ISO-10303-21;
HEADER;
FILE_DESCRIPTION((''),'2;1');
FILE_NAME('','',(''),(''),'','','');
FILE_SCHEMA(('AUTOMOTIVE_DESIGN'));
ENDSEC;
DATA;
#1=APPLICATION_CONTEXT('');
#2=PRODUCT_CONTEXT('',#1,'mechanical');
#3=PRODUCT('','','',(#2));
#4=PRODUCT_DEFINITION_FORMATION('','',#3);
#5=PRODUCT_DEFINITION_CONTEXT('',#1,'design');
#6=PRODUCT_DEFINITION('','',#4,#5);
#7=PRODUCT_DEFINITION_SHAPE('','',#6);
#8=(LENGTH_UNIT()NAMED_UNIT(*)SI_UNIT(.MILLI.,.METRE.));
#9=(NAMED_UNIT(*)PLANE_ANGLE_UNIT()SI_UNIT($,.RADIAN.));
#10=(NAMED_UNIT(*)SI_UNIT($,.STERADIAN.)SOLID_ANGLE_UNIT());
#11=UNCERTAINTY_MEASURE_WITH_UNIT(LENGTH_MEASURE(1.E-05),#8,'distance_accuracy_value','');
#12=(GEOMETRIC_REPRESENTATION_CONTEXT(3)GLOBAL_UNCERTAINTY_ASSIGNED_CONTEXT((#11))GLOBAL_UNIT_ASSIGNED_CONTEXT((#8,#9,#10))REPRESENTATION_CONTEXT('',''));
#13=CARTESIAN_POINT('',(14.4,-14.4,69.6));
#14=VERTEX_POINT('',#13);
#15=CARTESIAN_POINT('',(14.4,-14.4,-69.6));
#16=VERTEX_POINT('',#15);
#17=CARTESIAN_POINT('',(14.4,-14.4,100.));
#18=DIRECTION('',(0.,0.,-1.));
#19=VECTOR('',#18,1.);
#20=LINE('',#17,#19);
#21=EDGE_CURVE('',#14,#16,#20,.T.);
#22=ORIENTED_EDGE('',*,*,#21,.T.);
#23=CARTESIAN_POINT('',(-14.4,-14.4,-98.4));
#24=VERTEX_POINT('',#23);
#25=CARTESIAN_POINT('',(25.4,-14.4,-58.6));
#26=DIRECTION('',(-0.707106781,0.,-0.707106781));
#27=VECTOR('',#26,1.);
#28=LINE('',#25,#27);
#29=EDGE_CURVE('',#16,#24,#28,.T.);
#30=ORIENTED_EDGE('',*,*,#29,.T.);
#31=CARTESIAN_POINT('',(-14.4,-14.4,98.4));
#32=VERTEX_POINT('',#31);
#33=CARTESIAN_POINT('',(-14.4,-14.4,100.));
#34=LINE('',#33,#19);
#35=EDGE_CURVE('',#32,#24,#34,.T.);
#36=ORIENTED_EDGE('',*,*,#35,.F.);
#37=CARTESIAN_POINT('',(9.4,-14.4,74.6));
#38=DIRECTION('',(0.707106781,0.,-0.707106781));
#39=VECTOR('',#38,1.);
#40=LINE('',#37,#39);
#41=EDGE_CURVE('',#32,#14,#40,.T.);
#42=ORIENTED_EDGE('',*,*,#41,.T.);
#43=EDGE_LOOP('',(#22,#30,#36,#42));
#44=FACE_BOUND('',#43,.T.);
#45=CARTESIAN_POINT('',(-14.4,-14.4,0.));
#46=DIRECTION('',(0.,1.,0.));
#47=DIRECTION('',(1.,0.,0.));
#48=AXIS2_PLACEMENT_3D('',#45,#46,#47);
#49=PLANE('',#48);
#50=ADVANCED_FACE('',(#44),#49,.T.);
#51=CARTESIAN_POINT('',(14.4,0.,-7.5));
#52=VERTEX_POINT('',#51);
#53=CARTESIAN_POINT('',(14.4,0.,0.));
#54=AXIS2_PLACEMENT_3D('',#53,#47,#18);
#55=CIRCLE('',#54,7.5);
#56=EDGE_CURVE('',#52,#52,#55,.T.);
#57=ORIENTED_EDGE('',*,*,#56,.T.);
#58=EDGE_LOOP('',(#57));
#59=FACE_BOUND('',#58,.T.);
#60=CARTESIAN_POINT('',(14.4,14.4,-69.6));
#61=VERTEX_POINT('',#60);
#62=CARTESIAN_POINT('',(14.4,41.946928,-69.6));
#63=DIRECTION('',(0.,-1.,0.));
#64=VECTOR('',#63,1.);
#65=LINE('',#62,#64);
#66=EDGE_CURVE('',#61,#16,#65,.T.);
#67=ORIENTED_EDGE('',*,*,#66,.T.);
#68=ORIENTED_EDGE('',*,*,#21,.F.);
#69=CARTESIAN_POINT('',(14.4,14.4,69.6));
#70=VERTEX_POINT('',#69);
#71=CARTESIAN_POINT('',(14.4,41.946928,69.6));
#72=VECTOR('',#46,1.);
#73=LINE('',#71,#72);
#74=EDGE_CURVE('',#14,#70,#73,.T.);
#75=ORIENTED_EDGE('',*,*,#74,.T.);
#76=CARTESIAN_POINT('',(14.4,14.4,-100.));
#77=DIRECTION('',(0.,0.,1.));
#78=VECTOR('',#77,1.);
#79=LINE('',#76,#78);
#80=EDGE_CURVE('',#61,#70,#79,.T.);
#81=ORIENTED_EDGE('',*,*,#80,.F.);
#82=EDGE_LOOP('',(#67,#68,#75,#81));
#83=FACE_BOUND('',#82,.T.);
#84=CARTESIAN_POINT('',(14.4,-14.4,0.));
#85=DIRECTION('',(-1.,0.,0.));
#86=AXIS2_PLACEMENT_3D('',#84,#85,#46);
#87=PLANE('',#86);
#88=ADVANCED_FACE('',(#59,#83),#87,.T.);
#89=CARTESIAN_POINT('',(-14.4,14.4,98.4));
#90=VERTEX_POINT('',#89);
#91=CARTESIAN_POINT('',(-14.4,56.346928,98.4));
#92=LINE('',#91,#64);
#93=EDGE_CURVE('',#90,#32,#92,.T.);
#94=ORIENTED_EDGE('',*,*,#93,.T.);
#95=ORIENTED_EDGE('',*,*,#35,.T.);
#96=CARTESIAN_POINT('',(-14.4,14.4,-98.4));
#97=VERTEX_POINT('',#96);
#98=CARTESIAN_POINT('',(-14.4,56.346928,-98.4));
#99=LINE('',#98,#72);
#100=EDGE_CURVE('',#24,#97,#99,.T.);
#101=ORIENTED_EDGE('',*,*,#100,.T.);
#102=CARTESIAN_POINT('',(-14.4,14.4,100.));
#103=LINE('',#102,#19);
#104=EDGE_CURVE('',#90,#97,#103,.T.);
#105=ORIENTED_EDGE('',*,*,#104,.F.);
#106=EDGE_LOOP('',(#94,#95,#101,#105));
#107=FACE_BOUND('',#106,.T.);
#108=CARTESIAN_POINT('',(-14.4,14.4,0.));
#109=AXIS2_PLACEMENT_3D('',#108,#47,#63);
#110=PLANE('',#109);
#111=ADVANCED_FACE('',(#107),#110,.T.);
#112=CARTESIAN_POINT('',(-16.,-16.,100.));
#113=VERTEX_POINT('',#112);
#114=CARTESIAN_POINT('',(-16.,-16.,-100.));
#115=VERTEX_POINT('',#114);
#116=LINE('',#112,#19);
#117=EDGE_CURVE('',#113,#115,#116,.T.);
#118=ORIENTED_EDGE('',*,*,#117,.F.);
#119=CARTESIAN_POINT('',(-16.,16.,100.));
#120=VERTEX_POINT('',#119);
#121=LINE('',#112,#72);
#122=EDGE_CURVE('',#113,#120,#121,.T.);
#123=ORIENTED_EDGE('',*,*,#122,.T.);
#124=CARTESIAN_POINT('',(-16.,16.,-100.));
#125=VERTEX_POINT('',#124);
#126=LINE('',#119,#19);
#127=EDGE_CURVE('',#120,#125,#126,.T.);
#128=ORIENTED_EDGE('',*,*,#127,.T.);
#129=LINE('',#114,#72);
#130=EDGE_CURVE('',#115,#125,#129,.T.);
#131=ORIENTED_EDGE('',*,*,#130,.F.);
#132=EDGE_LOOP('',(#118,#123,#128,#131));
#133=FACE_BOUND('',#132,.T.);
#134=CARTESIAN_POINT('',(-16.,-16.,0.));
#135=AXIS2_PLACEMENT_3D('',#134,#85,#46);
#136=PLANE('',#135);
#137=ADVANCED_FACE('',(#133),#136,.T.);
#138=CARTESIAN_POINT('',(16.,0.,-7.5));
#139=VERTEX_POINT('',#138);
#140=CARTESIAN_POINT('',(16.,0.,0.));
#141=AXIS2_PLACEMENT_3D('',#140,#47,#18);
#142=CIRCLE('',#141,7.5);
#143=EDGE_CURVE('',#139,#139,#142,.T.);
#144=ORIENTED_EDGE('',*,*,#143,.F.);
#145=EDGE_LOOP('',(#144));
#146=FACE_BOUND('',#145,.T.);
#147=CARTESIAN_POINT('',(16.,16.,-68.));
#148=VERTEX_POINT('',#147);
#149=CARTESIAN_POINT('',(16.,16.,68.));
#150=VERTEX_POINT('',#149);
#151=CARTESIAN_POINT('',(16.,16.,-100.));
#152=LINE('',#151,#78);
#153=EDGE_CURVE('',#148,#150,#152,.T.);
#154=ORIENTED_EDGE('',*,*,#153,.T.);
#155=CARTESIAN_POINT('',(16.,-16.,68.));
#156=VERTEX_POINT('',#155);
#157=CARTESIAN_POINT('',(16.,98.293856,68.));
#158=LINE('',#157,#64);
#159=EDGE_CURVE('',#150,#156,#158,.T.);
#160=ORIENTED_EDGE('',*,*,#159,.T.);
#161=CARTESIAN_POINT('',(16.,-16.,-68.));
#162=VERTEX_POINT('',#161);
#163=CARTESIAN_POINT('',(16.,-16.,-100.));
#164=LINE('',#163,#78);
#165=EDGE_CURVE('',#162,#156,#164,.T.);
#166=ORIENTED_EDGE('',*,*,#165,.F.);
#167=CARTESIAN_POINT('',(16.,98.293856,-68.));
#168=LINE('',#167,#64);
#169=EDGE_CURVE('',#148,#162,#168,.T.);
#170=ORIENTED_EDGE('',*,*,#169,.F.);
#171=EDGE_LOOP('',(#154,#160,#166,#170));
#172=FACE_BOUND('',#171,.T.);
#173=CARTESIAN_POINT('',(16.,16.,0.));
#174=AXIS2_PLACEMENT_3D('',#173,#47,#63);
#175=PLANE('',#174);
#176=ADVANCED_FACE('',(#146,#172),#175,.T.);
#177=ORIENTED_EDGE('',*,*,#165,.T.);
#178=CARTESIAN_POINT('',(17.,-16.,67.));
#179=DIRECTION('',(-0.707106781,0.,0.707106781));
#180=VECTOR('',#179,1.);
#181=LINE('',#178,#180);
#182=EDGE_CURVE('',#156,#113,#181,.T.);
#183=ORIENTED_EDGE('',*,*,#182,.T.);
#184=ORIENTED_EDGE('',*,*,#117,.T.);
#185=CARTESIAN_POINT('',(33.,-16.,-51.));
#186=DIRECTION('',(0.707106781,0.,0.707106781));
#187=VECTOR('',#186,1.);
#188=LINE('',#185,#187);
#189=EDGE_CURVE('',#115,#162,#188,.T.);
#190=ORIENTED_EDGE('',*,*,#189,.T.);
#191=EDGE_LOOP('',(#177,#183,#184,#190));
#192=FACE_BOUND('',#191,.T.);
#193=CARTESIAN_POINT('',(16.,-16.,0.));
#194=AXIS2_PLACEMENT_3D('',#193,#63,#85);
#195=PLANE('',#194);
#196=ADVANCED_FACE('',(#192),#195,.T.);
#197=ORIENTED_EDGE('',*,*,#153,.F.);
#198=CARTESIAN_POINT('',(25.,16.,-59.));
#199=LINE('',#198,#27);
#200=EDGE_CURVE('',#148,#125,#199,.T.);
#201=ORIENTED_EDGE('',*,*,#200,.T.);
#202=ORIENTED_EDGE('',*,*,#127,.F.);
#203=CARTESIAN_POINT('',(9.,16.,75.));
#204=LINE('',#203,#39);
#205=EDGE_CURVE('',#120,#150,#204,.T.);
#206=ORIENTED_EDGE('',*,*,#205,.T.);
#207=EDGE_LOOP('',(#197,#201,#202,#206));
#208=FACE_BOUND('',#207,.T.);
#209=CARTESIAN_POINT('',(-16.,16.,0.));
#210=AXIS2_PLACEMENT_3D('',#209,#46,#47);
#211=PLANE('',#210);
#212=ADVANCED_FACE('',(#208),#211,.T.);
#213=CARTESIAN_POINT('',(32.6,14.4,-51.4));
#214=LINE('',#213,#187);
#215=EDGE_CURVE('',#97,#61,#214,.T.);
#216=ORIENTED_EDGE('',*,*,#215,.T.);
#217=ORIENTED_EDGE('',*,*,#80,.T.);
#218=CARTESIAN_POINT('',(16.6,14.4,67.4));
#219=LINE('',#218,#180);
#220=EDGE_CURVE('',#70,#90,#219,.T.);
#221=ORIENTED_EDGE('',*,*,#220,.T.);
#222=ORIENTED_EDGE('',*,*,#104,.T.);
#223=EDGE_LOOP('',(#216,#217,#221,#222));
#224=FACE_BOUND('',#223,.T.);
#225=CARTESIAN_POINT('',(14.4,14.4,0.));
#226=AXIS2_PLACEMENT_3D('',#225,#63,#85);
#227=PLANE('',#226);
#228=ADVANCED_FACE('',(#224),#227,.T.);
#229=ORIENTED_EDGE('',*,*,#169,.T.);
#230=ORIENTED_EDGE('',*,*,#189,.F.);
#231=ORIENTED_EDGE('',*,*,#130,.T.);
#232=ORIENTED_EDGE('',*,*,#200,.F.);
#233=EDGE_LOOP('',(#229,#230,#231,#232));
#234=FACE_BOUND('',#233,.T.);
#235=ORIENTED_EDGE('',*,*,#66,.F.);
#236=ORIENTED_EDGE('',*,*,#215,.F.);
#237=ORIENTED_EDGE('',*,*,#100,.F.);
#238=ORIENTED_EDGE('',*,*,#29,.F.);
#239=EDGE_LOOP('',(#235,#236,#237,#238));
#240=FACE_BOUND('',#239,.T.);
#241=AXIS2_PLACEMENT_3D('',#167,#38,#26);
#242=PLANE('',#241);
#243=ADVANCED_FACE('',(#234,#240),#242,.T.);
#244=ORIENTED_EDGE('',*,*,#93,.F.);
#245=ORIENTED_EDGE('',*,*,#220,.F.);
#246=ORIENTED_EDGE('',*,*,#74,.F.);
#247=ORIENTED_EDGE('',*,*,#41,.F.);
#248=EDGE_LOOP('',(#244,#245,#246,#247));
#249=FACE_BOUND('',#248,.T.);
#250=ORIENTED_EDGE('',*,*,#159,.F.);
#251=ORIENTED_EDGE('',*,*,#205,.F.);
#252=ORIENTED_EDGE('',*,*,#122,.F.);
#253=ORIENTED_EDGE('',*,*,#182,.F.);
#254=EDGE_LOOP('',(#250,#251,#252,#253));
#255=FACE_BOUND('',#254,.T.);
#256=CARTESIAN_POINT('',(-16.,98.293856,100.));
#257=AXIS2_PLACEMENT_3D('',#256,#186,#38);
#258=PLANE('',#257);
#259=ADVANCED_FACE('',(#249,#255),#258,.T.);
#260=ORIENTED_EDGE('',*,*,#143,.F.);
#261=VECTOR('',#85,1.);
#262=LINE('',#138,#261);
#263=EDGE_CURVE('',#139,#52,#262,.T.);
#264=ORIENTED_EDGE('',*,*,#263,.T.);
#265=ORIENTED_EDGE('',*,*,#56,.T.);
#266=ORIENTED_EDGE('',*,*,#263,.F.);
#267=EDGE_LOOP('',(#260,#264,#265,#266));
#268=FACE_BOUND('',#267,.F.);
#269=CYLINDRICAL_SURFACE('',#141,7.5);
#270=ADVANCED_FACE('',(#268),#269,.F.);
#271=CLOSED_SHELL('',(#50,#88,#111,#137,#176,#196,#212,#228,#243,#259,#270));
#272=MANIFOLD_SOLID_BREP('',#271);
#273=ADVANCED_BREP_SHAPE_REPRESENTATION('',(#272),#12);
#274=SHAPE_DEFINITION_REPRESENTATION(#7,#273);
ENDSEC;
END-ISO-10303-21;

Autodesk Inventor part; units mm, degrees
ref_plane "YZ Plane" through (0, 0, 0) normal (1, 0, 0) x (0, 1, 0)
ref_plane "XZ Plane" through (0, 0, 0) normal (0, 1, 0) x (-1, 0, 0)
ref_plane "XY Plane" through (0, 0, 0) normal (0, 0, 1) x (1, 0, 0)
sketch "スケッチ1" plane through (0, 0, 0) normal (0, 0, 1) x (1, 0, 0)
  line L0 (16, -16) -> (-16, -16)
  line L1 (-16, -16) -> (-16, 16)
  line L2 (-16, 16) -> (16, 16)
  line L3 (16, 16) -> (16, -16)
  line L4 (16, -16) -> (-16, 16) construction
  line L5 (-16, -16) -> (16, 16) construction
  line L6 (14.4, 14.4) -> (-14.4, 14.4)
  line L7 (-14.4, 14.4) -> (-14.4, -14.4)
  line L8 (-14.4, -14.4) -> (14.4, -14.4)
  line L9 (14.4, -14.4) -> (14.4, 14.4)
  point P0 (0, 0)
  dimension "d0" = 32
  dimension "d1" = 32
  dimension "d2" = 1.6
extrude "押し出し1" add sketch "スケッチ1" along normal mid plane 200
sketch "スケッチ3" plane through (16, -16, 100) normal (1, 0, 0) x (0, 0, -1)
  circle A0 centre (100, 16) radius 7.5
  dimension "d7" = 15
extrude "押し出し2" cut sketch "スケッチ3" against normal blind 30
chamfer "面取り2" distance 32 angle 45 1 edges at (16, 0, 100)
chamfer "面取り3" distance 32 angle 45 1 edges at (16, 0, -100)
properties part number "Pipe3"
